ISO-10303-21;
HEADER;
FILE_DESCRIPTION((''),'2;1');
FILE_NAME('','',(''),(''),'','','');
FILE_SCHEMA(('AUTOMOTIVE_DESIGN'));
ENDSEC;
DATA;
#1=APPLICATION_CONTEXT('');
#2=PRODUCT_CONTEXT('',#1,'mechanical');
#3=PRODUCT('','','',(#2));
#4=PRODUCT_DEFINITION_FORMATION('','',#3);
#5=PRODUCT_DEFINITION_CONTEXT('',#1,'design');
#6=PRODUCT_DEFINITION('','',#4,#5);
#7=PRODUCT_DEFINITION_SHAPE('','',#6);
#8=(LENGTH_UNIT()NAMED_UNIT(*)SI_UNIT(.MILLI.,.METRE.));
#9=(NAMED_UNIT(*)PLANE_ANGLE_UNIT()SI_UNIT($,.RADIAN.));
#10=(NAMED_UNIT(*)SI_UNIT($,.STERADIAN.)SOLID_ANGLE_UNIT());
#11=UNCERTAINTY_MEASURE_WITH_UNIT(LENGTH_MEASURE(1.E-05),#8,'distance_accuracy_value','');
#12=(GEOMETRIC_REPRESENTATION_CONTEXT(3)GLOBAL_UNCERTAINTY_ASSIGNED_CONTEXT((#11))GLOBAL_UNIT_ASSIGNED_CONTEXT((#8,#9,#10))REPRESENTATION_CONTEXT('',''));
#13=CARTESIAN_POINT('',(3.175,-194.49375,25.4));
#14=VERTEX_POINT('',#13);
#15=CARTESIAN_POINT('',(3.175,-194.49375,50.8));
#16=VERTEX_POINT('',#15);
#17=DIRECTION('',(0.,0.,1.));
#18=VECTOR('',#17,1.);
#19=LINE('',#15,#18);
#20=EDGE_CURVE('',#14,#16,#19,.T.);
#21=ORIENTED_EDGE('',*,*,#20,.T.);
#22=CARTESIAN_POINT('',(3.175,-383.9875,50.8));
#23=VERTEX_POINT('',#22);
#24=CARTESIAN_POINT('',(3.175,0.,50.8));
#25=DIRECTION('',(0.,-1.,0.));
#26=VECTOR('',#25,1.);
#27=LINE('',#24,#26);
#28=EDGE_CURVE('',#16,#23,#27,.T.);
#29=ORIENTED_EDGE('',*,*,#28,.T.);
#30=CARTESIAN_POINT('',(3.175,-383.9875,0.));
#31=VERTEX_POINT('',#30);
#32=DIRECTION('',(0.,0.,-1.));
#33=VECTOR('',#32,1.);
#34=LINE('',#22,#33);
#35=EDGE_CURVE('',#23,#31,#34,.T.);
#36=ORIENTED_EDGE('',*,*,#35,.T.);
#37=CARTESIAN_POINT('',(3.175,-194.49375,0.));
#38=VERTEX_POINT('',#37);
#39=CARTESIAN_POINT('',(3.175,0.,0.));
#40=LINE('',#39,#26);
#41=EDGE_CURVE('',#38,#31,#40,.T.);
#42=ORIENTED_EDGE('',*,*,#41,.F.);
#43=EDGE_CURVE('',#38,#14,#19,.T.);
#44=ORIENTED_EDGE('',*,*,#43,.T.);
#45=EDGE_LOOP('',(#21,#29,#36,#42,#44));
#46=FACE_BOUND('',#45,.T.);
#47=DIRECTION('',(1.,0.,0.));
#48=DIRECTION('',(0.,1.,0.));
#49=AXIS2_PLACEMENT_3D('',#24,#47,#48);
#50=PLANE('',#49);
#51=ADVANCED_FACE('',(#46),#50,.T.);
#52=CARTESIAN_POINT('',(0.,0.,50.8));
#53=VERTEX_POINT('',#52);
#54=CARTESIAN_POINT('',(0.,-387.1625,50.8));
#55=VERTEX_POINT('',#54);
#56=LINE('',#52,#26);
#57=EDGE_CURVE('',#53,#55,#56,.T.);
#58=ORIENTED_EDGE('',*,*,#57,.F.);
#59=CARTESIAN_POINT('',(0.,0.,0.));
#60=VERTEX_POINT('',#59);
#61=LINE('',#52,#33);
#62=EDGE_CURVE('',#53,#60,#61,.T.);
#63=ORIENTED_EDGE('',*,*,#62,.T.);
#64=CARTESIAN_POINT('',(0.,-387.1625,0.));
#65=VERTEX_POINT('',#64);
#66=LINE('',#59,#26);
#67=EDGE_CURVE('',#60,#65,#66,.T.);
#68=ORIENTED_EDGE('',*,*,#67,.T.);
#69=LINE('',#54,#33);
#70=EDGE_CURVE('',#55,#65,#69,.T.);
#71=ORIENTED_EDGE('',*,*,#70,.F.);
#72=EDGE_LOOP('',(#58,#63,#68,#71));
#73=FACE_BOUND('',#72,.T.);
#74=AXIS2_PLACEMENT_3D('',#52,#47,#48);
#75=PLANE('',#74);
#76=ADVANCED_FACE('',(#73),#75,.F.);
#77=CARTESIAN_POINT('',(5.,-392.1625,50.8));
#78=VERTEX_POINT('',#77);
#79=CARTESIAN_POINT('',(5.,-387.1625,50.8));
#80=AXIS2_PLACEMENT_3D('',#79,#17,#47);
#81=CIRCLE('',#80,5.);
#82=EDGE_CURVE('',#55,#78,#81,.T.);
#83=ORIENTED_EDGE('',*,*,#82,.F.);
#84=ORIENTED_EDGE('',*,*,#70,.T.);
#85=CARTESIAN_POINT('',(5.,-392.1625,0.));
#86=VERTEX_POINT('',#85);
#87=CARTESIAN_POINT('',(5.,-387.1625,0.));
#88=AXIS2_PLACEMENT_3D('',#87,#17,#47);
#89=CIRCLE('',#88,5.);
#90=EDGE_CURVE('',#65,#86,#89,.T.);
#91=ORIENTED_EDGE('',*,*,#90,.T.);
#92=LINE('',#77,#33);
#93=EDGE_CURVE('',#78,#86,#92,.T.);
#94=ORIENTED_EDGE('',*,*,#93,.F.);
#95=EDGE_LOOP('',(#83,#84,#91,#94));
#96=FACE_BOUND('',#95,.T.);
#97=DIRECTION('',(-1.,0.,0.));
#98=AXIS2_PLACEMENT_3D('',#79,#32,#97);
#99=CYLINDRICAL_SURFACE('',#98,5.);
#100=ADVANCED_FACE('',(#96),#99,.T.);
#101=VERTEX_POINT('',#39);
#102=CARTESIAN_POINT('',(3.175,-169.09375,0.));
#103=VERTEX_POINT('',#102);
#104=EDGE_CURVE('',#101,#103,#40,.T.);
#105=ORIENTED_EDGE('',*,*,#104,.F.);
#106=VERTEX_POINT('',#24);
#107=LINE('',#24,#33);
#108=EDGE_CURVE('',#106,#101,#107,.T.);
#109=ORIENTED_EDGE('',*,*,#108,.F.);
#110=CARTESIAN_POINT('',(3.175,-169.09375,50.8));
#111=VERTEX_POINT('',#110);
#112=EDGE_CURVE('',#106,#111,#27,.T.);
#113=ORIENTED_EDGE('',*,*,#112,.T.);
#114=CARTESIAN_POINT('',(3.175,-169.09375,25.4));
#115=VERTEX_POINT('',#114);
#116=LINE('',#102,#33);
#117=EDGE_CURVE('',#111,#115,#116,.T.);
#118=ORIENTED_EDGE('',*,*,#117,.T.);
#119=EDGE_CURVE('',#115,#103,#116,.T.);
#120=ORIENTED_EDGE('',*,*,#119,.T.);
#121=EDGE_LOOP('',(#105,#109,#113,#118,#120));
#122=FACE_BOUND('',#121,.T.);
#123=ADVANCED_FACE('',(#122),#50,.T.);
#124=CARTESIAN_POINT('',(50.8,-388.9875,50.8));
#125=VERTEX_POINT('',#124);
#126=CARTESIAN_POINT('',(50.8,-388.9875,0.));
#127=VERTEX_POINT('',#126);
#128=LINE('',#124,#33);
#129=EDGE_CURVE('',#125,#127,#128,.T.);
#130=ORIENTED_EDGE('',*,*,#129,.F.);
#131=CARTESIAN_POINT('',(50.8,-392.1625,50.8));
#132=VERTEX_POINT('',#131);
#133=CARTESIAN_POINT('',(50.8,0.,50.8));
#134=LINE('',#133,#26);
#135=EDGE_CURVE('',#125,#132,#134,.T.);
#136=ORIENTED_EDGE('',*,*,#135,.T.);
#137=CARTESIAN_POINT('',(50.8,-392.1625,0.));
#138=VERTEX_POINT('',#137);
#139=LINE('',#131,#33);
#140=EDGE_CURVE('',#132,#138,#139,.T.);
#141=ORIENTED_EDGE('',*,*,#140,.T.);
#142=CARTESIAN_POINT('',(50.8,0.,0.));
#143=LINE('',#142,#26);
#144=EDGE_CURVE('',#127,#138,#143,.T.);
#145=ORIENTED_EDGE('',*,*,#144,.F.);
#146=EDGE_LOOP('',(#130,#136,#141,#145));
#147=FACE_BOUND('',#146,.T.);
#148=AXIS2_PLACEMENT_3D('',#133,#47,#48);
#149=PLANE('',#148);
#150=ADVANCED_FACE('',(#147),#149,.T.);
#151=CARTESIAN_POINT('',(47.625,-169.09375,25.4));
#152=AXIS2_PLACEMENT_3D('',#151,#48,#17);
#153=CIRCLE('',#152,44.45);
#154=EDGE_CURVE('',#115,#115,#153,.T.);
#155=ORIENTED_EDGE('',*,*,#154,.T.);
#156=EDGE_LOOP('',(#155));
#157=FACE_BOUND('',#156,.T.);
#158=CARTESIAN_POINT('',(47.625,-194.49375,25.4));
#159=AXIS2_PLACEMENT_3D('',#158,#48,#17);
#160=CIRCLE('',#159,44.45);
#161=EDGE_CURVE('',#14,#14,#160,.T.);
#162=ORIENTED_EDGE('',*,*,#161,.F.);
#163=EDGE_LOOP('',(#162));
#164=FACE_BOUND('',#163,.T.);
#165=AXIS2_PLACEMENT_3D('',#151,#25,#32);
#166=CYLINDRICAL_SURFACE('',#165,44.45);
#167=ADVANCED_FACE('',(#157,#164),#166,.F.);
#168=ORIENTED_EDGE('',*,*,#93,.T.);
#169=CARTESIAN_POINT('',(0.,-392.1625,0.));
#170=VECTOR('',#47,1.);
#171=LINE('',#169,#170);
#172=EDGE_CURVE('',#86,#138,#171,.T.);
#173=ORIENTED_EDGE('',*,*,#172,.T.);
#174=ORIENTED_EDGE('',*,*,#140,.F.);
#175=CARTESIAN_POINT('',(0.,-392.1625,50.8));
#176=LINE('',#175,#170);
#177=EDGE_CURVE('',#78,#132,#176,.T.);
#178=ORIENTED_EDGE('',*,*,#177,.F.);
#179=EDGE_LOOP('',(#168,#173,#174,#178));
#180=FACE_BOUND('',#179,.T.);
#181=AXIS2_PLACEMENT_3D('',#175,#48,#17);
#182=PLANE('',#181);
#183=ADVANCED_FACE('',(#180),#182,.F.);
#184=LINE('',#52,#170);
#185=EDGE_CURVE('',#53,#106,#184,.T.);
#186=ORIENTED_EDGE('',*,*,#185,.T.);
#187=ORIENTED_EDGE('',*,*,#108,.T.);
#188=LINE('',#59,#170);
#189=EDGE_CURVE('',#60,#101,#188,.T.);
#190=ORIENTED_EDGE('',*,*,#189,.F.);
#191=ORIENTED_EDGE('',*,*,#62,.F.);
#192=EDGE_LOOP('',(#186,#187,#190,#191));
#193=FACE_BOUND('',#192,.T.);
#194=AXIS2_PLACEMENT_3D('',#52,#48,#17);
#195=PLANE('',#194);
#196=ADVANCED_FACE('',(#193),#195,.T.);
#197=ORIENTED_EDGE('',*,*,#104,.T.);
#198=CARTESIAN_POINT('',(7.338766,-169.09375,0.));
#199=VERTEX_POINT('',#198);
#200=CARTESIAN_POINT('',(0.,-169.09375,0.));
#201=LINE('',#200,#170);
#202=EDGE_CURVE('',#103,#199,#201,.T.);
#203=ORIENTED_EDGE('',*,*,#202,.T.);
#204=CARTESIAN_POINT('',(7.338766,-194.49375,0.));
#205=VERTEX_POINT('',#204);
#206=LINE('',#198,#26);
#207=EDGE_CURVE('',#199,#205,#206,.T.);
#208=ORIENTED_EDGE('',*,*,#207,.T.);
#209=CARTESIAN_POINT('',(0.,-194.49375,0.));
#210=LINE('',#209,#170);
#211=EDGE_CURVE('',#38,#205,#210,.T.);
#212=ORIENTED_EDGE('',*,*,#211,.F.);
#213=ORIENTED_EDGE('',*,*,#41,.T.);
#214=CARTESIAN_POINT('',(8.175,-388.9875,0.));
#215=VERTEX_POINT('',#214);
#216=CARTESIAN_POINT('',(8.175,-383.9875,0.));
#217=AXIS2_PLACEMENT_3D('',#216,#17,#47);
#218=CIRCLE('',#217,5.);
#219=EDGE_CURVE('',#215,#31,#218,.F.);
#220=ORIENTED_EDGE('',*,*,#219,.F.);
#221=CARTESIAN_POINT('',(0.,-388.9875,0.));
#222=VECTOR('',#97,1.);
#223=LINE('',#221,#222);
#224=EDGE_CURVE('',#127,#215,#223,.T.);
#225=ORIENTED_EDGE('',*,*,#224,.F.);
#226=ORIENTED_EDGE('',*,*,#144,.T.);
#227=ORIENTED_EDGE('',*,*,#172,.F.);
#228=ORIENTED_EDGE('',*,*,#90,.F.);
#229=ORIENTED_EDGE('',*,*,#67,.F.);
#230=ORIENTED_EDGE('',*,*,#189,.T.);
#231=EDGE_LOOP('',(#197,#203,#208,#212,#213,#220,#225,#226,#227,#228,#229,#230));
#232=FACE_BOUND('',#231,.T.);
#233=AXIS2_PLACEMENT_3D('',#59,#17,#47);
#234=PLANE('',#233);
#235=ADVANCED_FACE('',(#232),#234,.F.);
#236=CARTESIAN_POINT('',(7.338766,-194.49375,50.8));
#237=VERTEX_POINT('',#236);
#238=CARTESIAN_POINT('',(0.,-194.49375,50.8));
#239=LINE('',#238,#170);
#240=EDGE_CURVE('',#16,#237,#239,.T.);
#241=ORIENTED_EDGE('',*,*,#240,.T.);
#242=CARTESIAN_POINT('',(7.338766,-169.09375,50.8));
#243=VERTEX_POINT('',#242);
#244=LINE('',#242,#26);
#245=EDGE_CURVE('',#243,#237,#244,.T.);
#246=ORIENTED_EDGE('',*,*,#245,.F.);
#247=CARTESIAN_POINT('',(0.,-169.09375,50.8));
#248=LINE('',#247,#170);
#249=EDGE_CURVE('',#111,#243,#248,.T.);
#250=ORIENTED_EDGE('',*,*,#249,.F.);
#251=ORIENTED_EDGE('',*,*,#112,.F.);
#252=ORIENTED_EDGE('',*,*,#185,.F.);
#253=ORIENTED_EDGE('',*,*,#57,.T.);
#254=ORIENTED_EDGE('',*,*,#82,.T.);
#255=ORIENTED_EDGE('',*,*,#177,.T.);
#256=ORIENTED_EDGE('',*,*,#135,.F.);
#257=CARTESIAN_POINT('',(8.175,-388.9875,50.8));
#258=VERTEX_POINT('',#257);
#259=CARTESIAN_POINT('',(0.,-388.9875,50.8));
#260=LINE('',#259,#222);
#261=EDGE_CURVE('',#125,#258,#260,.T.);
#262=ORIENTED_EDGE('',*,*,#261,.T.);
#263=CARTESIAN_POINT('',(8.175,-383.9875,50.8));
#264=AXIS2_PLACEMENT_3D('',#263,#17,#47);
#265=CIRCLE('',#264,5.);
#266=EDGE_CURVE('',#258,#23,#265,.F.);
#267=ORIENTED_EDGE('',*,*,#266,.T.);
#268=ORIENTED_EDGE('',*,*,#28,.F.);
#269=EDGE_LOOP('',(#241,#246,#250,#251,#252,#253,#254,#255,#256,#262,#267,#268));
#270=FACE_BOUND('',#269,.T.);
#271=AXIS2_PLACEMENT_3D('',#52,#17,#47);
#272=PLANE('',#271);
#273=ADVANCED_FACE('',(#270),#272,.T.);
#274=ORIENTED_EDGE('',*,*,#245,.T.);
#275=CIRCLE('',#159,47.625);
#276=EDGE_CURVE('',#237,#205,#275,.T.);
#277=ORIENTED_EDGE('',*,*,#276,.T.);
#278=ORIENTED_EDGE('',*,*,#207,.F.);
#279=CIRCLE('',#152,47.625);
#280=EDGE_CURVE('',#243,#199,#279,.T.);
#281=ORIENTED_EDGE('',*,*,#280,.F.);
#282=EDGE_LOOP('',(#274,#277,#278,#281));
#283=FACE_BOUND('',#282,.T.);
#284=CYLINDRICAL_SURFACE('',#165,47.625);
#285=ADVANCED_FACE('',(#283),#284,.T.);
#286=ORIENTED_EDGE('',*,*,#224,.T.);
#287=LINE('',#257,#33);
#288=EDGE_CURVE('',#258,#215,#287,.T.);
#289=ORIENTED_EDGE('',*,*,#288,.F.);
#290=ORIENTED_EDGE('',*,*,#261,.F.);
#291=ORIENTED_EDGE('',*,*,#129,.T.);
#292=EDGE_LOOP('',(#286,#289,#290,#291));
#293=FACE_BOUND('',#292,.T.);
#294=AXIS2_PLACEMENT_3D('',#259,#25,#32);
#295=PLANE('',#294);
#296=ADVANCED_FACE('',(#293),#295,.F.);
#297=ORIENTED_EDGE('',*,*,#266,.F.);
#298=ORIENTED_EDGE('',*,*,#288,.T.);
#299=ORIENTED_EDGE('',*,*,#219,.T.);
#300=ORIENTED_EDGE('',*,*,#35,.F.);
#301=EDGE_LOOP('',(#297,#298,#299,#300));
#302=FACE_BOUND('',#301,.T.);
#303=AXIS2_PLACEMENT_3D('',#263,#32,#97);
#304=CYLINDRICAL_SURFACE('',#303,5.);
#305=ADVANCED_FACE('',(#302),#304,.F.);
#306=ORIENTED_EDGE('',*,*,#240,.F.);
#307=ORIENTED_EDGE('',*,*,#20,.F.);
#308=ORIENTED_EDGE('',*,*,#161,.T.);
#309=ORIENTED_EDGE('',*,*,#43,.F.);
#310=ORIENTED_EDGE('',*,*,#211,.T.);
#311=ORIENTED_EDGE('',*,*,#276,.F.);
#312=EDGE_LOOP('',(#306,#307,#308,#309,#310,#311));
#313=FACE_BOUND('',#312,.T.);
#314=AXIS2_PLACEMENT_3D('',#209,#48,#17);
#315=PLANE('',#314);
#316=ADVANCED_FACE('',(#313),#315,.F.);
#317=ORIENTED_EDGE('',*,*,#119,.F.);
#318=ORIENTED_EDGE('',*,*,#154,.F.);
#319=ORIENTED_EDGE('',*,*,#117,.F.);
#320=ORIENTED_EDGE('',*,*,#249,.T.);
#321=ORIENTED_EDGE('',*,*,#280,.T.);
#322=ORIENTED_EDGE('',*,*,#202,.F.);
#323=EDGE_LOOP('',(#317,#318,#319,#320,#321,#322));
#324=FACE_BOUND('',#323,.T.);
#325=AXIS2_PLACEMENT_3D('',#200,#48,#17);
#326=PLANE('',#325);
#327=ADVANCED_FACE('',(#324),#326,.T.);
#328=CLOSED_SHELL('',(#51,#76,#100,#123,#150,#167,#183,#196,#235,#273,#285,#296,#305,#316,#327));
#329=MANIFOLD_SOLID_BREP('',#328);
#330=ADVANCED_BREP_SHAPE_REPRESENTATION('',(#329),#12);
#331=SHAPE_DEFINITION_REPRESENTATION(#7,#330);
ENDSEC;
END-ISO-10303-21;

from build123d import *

# Parameters (mm, degrees)
BOSS_EXTRUDE1_DEPTH = 50.8
SKETCH2_R           = 44.45
BOSS_EXTRUDE3_DEPTH = 25.4


with BuildPart() as part:
    # Sketch1 → Boss-Extrude1 (new body)
    with BuildSketch(Plane.XY):
        with BuildLine():
            Line((3.175, 0), (0, 0))
            Line((0, 0), (0, -387.1625))
            ThreePointArc((0, -387.1625), (1.464466094, -390.698033906), (5, -392.1625))
            Line((5, -392.1625), (50.8, -392.1625))
            Line((50.8, -392.1625), (50.8, -388.9875))
            Line((50.8, -388.9875), (8.175, -388.9875))
            ThreePointArc((8.175, -388.9875), (4.639466094, -387.523033906), (3.175, -383.9875))
            Line((3.175, -383.9875), (3.175, 0))
        make_face()
    extrude(amount=BOSS_EXTRUDE1_DEPTH)

    # Sketch2 → Boss-Extrude3 (add)
    with BuildSketch(Plane(origin=(0, -194.49375, 0), x_dir=(1, 0, 0), z_dir=(0, 1, 0))):
        with BuildLine():
            Line((3.175, -42.497898263), (3.175, -50.8))
            Line((3.175, -50.8), (7.338766309, -50.8))
            ThreePointArc((7.338766309, -50.8), (95.25, -25.4), (7.338766309, 0))
            Line((7.338766309, 0), (3.175, 0))
            Line((3.175, 0), (3.175, -8.302101737))
            ThreePointArc((3.175, -8.302101737), (0, -25.4), (3.175, -42.497898263))
        make_face()
        with Locations((47.625, -25.4)):
            Circle(SKETCH2_R, mode=Mode.SUBTRACT)
    extrude(amount=BOSS_EXTRUDE3_DEPTH)


solid = part.part
